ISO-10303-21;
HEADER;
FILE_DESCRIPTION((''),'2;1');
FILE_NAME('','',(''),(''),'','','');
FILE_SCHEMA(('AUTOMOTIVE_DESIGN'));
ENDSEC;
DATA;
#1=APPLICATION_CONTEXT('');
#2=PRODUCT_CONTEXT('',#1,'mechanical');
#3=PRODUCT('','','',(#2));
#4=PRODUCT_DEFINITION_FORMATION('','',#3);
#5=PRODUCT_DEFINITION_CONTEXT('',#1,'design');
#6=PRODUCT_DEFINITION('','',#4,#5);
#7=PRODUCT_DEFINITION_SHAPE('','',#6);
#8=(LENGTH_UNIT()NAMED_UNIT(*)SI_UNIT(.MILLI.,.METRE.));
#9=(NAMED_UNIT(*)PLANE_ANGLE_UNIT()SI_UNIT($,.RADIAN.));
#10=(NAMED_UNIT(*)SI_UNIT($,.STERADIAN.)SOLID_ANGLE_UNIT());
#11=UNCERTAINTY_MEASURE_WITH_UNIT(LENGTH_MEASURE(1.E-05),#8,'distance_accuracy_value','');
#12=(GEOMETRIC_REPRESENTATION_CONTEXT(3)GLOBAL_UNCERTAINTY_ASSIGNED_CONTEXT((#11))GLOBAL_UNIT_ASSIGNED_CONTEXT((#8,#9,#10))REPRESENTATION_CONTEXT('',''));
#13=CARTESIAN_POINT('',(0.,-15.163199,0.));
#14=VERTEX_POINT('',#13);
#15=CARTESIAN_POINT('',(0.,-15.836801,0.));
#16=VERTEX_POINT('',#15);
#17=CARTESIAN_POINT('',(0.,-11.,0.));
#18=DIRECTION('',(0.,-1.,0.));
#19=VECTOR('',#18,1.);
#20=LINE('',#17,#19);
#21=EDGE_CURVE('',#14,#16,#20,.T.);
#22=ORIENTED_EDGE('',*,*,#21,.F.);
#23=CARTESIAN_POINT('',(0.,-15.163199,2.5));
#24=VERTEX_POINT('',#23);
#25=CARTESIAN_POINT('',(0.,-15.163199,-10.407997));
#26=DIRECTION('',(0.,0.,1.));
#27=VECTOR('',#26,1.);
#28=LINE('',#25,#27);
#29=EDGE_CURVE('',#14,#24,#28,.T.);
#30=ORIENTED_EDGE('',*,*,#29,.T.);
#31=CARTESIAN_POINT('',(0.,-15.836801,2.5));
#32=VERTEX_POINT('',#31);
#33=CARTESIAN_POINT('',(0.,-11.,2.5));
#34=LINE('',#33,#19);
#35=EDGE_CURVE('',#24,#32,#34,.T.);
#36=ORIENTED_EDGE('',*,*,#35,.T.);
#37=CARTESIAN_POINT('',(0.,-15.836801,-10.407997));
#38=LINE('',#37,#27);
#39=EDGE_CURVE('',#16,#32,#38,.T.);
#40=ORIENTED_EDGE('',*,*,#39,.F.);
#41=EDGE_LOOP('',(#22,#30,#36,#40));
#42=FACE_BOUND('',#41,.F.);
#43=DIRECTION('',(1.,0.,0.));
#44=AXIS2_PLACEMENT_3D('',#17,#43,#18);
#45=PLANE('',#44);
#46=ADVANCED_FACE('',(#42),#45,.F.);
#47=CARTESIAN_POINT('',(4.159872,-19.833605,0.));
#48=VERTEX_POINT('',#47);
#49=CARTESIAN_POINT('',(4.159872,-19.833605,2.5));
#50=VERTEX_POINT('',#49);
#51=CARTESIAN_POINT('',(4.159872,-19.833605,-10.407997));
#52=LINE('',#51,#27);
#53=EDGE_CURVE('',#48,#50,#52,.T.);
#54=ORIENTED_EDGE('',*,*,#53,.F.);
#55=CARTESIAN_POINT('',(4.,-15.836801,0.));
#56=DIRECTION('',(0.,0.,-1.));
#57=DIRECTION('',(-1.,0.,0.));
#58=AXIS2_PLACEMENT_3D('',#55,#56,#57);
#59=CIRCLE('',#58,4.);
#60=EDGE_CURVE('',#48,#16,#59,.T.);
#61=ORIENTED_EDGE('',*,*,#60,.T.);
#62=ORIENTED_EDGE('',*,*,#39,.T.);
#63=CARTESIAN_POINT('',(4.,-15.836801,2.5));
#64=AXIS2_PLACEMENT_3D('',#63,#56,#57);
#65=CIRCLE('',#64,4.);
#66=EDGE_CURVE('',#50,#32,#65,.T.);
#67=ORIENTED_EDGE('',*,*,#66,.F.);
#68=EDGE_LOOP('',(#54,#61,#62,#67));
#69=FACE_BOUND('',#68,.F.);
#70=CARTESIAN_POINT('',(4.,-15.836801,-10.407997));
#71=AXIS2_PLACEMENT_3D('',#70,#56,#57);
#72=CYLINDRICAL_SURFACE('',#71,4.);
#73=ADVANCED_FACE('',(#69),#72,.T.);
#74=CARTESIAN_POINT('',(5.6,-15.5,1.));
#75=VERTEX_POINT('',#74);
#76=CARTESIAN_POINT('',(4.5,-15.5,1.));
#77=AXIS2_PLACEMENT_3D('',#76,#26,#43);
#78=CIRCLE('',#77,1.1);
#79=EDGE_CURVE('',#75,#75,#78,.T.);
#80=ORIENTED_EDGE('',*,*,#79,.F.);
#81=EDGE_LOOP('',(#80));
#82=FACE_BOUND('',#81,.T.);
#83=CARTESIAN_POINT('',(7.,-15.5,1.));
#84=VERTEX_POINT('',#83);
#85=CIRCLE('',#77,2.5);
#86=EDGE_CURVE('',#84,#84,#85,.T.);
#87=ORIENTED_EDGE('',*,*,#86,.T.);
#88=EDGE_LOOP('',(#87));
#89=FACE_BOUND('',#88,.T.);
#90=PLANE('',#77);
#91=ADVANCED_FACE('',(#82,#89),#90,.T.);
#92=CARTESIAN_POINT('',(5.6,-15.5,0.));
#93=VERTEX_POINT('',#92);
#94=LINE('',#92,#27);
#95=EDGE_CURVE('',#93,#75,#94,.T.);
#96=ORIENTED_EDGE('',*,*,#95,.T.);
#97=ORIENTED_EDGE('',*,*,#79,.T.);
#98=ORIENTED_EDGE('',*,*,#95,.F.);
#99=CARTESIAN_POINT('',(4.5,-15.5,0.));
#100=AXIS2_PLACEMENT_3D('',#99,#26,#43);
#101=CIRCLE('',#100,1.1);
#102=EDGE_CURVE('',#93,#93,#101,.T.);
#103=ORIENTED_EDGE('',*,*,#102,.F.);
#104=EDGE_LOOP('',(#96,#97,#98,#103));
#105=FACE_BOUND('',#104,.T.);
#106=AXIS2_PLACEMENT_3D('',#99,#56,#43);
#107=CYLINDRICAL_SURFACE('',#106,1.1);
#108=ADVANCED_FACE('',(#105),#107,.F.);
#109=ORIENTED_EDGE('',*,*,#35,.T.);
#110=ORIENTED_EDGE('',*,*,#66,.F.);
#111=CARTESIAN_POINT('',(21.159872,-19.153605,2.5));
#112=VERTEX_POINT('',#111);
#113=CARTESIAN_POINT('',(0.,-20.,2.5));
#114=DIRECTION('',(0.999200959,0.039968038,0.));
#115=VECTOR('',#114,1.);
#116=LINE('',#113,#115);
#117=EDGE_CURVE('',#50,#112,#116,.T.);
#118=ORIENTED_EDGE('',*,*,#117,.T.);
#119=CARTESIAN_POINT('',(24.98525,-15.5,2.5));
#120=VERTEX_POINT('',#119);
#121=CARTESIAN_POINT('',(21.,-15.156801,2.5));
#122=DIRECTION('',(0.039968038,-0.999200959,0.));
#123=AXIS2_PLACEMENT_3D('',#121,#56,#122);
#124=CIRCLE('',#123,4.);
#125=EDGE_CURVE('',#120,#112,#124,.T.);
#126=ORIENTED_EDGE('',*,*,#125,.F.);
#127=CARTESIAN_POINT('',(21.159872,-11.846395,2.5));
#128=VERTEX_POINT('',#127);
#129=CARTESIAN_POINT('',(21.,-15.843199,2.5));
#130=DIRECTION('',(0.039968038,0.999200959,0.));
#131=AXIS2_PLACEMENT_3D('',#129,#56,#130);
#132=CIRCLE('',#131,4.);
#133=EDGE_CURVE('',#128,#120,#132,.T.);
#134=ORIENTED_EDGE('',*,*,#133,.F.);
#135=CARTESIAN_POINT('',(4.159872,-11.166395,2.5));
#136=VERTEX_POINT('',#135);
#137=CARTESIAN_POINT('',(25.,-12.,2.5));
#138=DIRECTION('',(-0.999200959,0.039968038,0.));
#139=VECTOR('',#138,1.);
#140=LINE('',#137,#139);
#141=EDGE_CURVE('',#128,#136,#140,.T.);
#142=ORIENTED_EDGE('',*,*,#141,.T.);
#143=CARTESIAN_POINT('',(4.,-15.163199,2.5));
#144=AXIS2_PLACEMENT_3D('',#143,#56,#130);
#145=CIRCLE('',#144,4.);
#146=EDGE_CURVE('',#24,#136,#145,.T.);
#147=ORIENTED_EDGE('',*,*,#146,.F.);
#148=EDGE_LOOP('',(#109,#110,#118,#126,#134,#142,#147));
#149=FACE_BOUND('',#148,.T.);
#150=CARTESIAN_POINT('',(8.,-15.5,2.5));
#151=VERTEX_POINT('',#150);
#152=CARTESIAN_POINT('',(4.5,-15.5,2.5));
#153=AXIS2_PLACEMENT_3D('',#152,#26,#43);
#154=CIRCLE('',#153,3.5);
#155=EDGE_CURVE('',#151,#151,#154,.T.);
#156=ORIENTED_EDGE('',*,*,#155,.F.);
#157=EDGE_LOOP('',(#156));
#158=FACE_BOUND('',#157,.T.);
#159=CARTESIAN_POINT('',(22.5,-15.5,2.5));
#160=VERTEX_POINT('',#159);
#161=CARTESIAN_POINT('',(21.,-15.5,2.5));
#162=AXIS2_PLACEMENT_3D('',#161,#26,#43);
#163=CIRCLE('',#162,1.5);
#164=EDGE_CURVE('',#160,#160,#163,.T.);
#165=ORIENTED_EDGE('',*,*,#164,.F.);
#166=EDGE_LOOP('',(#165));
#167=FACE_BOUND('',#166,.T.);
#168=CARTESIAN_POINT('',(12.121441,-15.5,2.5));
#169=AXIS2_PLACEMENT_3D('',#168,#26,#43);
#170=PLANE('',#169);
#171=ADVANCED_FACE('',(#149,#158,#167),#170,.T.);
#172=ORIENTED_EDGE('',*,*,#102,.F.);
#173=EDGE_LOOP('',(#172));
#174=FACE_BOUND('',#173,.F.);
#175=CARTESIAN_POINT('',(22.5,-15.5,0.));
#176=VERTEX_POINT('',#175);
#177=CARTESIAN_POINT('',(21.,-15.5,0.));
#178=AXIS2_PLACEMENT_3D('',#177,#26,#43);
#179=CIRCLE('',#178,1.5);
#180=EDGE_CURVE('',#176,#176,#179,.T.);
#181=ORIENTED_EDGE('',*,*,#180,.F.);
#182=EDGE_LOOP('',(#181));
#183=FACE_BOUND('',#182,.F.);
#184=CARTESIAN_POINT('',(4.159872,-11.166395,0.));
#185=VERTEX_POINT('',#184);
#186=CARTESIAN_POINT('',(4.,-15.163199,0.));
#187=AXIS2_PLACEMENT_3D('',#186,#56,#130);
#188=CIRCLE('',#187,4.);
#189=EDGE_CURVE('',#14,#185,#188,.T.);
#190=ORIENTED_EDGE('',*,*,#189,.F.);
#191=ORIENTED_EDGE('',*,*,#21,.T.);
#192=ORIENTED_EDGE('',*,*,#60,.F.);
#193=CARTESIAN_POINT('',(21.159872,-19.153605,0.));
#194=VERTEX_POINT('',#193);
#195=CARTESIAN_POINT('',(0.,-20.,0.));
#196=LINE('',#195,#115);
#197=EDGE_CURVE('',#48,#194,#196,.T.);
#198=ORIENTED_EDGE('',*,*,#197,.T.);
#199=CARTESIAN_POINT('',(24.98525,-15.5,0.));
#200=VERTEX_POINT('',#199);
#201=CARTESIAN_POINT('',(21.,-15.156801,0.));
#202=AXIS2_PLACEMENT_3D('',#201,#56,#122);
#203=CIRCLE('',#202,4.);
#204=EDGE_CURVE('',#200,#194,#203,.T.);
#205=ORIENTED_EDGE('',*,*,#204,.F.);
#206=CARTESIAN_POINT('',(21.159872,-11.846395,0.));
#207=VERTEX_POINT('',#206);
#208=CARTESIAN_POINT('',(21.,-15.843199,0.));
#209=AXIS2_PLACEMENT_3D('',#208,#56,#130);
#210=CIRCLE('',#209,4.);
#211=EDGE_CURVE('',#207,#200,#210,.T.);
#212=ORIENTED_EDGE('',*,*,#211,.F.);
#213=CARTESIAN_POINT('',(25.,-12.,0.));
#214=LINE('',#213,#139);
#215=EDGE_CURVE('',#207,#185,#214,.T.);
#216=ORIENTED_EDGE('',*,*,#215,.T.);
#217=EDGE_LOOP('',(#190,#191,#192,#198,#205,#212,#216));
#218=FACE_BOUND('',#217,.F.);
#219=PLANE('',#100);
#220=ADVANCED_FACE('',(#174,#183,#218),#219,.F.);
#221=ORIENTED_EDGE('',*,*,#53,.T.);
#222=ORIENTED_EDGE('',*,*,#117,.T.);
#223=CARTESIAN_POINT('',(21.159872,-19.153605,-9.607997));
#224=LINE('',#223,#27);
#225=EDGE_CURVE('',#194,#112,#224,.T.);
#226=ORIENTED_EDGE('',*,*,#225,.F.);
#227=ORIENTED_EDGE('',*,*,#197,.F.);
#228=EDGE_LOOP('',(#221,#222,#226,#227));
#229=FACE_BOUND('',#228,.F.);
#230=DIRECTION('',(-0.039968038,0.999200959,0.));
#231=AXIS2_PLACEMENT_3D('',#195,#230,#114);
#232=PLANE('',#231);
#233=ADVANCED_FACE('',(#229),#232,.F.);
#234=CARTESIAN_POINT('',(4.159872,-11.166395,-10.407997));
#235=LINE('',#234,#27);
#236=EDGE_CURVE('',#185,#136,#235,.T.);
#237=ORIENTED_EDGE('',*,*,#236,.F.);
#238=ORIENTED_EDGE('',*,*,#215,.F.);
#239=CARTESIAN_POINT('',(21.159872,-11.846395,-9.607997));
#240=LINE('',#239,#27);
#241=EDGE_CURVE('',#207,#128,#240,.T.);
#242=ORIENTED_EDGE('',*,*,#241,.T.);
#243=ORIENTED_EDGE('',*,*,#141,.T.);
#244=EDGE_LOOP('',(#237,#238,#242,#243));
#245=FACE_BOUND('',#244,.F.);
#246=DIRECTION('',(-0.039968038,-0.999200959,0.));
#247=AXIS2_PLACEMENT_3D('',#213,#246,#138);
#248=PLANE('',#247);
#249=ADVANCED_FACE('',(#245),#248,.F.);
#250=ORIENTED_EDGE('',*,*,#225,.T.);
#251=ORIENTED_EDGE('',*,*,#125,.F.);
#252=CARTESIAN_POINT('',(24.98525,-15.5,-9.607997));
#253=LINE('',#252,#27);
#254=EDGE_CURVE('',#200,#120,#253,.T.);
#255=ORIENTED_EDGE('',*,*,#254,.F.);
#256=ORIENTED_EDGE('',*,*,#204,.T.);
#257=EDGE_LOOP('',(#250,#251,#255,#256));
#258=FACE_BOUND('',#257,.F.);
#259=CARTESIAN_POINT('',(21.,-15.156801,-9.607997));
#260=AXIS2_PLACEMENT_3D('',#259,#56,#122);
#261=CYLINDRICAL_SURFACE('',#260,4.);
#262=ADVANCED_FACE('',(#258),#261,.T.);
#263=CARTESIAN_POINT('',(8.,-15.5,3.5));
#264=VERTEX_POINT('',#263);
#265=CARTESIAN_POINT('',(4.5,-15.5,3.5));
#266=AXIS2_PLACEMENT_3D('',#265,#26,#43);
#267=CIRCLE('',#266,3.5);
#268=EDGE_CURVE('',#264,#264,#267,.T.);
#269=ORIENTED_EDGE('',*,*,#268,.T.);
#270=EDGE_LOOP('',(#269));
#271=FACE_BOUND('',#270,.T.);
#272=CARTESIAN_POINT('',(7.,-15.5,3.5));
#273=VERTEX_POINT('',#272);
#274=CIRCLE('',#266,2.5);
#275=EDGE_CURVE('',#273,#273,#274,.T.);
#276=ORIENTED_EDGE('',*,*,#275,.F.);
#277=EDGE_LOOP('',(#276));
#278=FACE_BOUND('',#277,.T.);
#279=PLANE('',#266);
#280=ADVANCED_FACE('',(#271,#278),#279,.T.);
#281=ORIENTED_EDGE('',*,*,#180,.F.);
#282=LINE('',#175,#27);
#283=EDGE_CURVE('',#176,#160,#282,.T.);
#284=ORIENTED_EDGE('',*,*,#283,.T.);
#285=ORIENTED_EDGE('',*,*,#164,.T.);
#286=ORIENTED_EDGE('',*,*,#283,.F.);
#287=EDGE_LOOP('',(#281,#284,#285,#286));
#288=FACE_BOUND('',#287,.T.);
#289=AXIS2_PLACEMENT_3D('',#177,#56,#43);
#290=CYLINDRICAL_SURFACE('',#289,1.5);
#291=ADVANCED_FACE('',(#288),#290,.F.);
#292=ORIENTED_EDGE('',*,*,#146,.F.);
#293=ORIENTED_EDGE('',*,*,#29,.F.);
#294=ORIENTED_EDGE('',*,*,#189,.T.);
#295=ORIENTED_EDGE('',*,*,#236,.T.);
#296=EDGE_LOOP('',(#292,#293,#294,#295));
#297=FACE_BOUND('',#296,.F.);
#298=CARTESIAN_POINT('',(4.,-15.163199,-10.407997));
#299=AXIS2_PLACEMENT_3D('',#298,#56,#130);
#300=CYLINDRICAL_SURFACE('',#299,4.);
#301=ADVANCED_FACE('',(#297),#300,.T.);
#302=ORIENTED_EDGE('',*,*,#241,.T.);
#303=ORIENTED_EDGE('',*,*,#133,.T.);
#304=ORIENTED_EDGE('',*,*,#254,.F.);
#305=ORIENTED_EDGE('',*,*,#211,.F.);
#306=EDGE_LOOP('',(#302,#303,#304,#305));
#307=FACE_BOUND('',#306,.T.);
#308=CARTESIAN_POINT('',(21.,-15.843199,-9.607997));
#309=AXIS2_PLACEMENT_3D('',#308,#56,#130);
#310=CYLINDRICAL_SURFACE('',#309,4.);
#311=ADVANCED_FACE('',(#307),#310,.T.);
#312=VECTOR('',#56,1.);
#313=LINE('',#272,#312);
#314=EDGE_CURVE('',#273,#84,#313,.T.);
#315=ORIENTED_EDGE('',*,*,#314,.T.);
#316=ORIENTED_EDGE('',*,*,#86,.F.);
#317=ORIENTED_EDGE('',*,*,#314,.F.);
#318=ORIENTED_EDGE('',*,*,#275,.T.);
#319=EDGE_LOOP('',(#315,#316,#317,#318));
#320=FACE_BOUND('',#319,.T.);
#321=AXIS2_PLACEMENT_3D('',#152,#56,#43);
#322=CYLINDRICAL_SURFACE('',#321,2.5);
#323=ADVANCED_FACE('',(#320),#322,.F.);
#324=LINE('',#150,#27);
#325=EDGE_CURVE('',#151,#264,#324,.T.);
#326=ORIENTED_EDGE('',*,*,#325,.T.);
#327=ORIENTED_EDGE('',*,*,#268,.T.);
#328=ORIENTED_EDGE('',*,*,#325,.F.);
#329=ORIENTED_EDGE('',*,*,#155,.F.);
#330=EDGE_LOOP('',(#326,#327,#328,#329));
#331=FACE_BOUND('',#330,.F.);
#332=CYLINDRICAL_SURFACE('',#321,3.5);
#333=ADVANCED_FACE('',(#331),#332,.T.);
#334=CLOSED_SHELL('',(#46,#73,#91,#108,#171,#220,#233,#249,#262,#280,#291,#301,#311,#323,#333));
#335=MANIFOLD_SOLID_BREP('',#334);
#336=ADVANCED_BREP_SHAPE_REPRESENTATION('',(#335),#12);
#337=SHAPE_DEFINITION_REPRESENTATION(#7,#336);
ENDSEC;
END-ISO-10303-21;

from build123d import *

# Parameters (mm, degrees)
F0_R        = 2.5
F0_R_2      = 1.5
F1_DEPTH    = 2.5
F2_T1_DEPTH = 21.7159936051
F2_T3_DEPTH = 23.3159936051
F3_R        = 3.5
F3_R_2      = 2.5
F4_DEPTH    = 1
F5_R        = 2.5
F5_R_2      = 1.1
F6_DEPTH    = 1


# Not quite as in the source:
# - a fillet or chamfer that OpenCascade refuses, or shapes differently, is made with other operations: its cross-section is extruded or revolved along the edge and cut away or added


with BuildPart() as f1:
    # F0 (on Top) → F1 (new body)
    with BuildSketch(Plane.XY):
        Polygon((25, -12), (0, -11), (0, -20), (25, -19), align=None)
        with Locations((4.5, -15.5)):
            Circle(F0_R, mode=Mode.SUBTRACT)
        with Locations((21, -15.5)):
            Circle(F0_R_2, mode=Mode.SUBTRACT)
    extrude(amount=F1_DEPTH)

    # F2: fillet of radius 4 on 4 edges, made by hand

    # F2_s2 → F2_t1 (cut)
    with BuildSketch(Plane.XY.offset(-9.6079968026)):
        with BuildLine():
            ThreePointArc((21.1598721534, -11.8463948861), (23.8843966972, -13.0718712966), (25, -15.843198721))
            Line((25, -15.843198721), (25, -12))
            Line((25, -12), (21.1598721534, -11.8463948861))
        make_face()
        with BuildLine():
            ThreePointArc((21.1598721534, -19.1536051139), (23.8843966972, -17.9281287034), (25, -15.156801279))
            Line((25, -15.156801279), (25, -19))
            Line((25, -19), (21.1598721534, -19.1536051139))
        make_face()
    extrude(amount=F2_T1_DEPTH, mode=Mode.SUBTRACT)

    # F2_s4 → F2_t3 (cut)
    with BuildSketch(Plane.XY.offset(-10.4079968026)):
        with BuildLine():
            ThreePointArc((4.1598721534, -11.1663948861), (1.2286725756, -12.2788020238), (0, -15.163198721))
            Line((0, -15.163198721), (0, -11))
            Line((0, -11), (4.1598721534, -11.1663948861))
        make_face()
        with BuildLine():
            ThreePointArc((0, -15.836801279), (1.2286725756, -18.7211979762), (4.1598721534, -19.8336051139))
            Line((4.1598721534, -19.8336051139), (0, -20))
            Line((0, -20), (0, -15.836801279))
        make_face()
    extrude(amount=F2_T3_DEPTH, mode=Mode.SUBTRACT)

    # F3 (on face) → F4 (join)
    with BuildSketch(Plane.XY.offset(2.5)):
        with Locations((4.5, -15.5)):
            Circle(F3_R)
        with Locations((4.5, -15.5)):
            Circle(F3_R_2, mode=Mode.SUBTRACT)
    extrude(amount=F4_DEPTH)

    # F5 (on Top) → F6 (join)
    with BuildSketch(Plane.XY):
        with Locations((4.5, -15.5)):
            Circle(F5_R)
        with Locations((4.5, -15.5)):
            Circle(F5_R_2, mode=Mode.SUBTRACT)
    extrude(amount=F6_DEPTH)


solid = f1.part
